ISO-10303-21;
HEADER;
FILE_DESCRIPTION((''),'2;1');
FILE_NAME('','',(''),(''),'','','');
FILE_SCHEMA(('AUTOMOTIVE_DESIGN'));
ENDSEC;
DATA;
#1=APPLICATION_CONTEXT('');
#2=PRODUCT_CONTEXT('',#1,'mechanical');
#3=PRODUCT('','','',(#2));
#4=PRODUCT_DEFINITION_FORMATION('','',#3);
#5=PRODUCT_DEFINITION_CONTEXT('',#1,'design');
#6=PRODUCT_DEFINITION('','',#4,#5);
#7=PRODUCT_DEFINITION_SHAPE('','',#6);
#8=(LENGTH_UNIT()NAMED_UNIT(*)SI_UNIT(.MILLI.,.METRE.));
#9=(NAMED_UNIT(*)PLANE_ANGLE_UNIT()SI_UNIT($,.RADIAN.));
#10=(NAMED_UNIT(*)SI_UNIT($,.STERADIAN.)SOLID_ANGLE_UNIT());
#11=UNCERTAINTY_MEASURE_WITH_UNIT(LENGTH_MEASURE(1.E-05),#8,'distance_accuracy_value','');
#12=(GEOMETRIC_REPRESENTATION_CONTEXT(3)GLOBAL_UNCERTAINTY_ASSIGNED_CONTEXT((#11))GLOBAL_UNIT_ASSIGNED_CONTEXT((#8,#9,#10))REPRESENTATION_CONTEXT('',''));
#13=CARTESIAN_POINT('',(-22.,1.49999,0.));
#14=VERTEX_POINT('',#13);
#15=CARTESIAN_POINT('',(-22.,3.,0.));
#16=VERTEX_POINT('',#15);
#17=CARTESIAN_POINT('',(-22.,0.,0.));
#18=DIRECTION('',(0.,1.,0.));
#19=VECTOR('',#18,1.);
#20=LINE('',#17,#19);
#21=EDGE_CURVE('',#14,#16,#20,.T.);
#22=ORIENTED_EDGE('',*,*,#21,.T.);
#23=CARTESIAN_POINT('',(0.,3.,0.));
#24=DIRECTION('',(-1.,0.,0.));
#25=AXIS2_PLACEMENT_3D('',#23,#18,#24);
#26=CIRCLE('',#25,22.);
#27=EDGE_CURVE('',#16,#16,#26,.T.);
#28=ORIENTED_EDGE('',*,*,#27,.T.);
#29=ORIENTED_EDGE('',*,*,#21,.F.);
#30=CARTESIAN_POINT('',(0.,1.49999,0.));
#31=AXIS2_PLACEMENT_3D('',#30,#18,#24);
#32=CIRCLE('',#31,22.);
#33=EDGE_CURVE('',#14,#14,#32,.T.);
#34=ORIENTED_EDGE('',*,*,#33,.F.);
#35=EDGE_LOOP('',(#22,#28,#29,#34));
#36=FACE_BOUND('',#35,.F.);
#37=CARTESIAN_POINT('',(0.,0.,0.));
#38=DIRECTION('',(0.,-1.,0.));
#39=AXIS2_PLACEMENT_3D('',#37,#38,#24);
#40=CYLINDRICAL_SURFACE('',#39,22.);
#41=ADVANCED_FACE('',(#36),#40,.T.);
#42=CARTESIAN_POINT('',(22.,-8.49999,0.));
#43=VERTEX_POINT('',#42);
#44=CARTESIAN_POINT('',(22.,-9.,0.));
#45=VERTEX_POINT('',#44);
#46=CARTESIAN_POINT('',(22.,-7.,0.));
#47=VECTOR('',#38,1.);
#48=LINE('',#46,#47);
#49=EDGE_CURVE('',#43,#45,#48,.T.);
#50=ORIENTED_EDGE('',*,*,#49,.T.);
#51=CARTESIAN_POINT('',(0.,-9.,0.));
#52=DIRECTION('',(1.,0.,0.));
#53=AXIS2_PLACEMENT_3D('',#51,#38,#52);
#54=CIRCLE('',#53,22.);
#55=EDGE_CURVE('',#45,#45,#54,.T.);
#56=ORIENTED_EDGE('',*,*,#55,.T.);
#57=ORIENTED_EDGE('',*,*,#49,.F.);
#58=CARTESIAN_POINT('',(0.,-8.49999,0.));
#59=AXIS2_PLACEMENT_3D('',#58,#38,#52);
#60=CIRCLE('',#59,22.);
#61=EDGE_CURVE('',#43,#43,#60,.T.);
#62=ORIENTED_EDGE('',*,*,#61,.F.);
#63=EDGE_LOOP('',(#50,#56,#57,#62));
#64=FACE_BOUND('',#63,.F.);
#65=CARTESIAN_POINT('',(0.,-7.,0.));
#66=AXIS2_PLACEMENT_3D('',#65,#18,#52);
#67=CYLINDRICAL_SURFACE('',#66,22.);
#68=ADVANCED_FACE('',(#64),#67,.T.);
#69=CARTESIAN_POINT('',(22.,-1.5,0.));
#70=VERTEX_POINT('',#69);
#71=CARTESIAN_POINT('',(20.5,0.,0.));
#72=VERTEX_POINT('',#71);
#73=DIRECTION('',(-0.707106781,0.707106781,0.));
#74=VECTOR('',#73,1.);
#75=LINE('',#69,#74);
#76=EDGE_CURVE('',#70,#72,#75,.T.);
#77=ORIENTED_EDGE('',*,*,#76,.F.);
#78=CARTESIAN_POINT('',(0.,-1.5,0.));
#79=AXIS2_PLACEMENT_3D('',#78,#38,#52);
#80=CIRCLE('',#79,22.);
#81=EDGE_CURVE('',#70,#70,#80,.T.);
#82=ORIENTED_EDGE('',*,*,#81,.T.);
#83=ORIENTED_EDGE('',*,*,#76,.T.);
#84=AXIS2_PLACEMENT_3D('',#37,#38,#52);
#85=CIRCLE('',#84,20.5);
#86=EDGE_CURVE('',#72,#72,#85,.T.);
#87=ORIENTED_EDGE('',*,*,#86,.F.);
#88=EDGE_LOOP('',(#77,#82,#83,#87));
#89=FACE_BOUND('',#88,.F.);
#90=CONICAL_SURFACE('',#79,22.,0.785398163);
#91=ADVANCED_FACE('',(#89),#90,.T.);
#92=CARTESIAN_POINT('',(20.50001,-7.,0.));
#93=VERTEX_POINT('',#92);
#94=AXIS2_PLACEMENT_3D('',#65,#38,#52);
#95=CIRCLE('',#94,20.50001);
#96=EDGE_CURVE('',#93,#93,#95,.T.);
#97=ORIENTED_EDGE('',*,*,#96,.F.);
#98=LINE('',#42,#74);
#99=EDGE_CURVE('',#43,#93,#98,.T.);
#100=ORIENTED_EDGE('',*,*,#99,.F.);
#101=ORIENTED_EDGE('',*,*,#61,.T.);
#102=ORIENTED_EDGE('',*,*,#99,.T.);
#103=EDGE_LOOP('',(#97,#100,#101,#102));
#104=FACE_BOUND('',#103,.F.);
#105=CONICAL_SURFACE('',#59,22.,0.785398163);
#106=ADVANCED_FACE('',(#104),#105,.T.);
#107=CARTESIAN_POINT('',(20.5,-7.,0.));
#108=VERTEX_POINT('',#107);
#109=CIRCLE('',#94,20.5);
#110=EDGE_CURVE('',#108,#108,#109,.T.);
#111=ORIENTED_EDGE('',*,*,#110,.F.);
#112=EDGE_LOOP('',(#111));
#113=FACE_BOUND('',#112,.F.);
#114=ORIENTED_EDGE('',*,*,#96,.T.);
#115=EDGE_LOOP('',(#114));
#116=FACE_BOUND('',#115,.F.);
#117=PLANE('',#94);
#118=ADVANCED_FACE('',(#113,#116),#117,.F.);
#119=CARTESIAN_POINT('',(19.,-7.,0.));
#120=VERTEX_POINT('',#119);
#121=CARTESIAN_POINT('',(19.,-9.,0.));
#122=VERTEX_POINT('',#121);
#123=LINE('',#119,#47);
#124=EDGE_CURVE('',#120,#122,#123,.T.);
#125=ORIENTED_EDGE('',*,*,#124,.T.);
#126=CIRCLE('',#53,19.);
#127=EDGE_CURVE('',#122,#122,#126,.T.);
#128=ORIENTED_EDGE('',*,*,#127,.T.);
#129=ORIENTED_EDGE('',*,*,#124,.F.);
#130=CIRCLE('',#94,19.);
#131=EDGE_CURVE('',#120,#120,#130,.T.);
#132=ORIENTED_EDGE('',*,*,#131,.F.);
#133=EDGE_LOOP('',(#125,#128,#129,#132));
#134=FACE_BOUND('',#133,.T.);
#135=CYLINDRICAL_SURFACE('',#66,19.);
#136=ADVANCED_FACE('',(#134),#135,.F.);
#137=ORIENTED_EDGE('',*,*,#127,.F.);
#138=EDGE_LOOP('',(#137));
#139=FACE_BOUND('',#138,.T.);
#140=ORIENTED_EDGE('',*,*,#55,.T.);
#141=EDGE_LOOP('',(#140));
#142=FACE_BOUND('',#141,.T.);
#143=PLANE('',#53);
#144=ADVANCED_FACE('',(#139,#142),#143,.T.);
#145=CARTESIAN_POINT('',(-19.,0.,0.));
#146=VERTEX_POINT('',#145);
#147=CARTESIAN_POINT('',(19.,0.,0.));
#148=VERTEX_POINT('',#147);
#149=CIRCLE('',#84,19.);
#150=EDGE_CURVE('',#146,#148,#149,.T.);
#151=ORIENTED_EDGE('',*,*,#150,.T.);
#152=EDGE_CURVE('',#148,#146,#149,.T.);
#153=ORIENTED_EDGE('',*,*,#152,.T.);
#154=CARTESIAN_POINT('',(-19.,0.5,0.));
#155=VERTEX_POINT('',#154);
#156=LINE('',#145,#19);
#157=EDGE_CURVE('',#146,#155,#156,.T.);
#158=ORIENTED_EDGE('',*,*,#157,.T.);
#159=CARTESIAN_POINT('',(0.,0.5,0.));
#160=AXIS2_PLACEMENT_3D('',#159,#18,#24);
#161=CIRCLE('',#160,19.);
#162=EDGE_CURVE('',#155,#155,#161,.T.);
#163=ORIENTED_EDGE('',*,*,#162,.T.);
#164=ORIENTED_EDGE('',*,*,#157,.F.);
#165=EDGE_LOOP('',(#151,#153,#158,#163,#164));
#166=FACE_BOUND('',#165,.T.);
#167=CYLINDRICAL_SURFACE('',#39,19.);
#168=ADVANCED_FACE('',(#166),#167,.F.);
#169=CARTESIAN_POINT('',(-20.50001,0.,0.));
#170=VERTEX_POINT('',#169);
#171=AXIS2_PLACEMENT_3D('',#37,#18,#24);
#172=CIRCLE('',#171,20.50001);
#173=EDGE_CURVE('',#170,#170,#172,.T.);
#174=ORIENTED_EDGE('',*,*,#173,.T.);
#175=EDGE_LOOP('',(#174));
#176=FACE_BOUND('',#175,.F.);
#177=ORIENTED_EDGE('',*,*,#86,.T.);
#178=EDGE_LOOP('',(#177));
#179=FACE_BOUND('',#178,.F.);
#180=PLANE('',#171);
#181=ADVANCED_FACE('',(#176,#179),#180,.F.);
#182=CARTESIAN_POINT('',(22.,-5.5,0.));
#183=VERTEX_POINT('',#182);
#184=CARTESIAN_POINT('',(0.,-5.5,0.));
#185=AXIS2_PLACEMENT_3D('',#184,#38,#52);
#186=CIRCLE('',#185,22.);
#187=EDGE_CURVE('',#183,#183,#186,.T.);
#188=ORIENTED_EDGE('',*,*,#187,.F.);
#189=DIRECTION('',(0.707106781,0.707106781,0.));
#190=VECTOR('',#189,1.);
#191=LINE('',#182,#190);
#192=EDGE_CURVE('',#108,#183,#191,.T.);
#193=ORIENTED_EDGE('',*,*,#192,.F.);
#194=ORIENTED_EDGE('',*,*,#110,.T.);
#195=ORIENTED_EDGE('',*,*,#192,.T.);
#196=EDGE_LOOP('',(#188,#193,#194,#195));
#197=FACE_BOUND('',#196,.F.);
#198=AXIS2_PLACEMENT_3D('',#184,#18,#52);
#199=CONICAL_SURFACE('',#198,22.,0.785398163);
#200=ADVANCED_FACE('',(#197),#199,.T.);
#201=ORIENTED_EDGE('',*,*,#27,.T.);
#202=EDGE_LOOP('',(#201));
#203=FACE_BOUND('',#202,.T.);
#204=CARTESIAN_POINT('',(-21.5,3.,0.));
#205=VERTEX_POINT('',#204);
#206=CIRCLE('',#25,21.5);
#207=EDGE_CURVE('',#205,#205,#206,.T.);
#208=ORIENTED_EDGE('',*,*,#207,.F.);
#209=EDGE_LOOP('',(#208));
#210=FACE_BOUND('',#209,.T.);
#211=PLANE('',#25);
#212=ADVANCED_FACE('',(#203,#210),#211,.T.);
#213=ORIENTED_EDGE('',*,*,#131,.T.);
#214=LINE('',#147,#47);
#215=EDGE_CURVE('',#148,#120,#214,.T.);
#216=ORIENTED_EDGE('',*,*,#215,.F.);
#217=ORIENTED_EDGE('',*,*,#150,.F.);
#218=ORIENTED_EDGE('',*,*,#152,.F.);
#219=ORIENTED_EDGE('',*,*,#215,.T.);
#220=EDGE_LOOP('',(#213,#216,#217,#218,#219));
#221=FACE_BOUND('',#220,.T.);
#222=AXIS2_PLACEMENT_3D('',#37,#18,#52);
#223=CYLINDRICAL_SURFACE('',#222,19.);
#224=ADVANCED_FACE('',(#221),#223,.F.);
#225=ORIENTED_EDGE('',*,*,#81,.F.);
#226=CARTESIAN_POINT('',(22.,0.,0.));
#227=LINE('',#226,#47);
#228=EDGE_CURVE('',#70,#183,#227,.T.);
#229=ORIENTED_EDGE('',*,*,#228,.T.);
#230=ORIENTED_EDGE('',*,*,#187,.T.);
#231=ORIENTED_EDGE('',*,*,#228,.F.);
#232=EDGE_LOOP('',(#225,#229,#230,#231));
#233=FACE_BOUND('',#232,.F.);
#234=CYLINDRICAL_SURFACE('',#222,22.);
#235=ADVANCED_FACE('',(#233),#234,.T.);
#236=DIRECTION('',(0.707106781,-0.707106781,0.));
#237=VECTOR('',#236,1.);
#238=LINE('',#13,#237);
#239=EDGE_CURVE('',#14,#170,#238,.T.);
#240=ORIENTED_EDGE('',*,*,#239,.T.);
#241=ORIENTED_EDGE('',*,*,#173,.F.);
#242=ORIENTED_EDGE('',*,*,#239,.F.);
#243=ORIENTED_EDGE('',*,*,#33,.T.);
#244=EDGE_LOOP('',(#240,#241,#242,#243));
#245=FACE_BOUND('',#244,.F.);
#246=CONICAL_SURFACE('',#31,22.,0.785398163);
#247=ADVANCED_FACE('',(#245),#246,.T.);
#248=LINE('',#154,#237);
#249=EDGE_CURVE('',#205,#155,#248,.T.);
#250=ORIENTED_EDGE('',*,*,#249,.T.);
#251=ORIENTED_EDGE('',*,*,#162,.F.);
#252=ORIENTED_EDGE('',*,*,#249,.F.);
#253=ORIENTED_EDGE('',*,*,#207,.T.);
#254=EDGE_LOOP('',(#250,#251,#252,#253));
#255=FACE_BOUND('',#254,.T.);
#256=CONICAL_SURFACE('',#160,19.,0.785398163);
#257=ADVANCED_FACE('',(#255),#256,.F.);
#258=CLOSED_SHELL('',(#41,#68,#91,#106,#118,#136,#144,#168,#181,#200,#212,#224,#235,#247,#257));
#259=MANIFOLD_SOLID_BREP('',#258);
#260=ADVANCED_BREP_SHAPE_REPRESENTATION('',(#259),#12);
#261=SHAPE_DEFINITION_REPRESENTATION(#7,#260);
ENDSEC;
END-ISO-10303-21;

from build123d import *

# Parameters (mm, degrees)
F0_R     = 22
F0_R_2   = 19
F1_DEPTH = 7
F2_SIZE  = 1.5
F3_R     = 22
F3_R_2   = 19
F4_DEPTH = 3
F5_SIZE  = 1.49999
F6_SIZE  = 2.5
F7_SIZE  = 1.5
F8_R     = 22
F8_R_2   = 19
F9_DEPTH = 2
F10_SIZE = 1.49999


# Not quite as in the source:
# - a fillet or chamfer is up to 0.001 mm smaller than in the source, because OpenCascade refuses the exact size


with BuildPart() as f1:
    # F0 (on Front) → F1 (new body)
    with BuildSketch(Plane.XZ):
        Circle(F0_R)
        Circle(F0_R_2, mode=Mode.SUBTRACT)
    extrude(amount=F1_DEPTH)

    # F2
    f2_edges = [f1.edges().sort_by_distance(p)[0] for p in [
        (-22, 0, 0),
    ]]
    chamfer(f2_edges, length=F2_SIZE)

    # F3 (on face) → F4 (join)
    with BuildSketch(Plane(origin=(0, 0, 0), x_dir=(-1, 0, 0), z_dir=(0, 1, 0))):
        Circle(F3_R)
        Circle(F3_R_2, mode=Mode.SUBTRACT)
    extrude(amount=F4_DEPTH)

    # F5 (size 1.5 in the source; OpenCascade refuses exactly that, so slightly less here)
    f5_edges = [f1.edges().sort_by_distance(p)[0] for p in [
        (22, 0, 0),
    ]]
    chamfer(f5_edges, length=F5_SIZE)

    # F6
    f6_edges = [f1.edges().sort_by_distance(p)[0] for p in [
        (19, 3, 0),
    ]]
    chamfer(f6_edges, length=F6_SIZE)

    # F7
    f7_edges = [f1.edges().sort_by_distance(p)[0] for p in [
        (-22, -7, 0),
    ]]
    chamfer(f7_edges, length=F7_SIZE)

    # F8 (on face) → F9 (join)
    with BuildSketch(Plane.XZ.offset(7)):
        Circle(F8_R)
        Circle(F8_R_2, mode=Mode.SUBTRACT)
    extrude(amount=F9_DEPTH)

    # F10 (size 1.5 in the source; OpenCascade refuses exactly that, so slightly less here)
    f10_edges = [f1.edges().sort_by_distance(p)[0] for p in [
        (-22, -7, 0),
    ]]
    chamfer(f10_edges, length=F10_SIZE)


solid = f1.part
